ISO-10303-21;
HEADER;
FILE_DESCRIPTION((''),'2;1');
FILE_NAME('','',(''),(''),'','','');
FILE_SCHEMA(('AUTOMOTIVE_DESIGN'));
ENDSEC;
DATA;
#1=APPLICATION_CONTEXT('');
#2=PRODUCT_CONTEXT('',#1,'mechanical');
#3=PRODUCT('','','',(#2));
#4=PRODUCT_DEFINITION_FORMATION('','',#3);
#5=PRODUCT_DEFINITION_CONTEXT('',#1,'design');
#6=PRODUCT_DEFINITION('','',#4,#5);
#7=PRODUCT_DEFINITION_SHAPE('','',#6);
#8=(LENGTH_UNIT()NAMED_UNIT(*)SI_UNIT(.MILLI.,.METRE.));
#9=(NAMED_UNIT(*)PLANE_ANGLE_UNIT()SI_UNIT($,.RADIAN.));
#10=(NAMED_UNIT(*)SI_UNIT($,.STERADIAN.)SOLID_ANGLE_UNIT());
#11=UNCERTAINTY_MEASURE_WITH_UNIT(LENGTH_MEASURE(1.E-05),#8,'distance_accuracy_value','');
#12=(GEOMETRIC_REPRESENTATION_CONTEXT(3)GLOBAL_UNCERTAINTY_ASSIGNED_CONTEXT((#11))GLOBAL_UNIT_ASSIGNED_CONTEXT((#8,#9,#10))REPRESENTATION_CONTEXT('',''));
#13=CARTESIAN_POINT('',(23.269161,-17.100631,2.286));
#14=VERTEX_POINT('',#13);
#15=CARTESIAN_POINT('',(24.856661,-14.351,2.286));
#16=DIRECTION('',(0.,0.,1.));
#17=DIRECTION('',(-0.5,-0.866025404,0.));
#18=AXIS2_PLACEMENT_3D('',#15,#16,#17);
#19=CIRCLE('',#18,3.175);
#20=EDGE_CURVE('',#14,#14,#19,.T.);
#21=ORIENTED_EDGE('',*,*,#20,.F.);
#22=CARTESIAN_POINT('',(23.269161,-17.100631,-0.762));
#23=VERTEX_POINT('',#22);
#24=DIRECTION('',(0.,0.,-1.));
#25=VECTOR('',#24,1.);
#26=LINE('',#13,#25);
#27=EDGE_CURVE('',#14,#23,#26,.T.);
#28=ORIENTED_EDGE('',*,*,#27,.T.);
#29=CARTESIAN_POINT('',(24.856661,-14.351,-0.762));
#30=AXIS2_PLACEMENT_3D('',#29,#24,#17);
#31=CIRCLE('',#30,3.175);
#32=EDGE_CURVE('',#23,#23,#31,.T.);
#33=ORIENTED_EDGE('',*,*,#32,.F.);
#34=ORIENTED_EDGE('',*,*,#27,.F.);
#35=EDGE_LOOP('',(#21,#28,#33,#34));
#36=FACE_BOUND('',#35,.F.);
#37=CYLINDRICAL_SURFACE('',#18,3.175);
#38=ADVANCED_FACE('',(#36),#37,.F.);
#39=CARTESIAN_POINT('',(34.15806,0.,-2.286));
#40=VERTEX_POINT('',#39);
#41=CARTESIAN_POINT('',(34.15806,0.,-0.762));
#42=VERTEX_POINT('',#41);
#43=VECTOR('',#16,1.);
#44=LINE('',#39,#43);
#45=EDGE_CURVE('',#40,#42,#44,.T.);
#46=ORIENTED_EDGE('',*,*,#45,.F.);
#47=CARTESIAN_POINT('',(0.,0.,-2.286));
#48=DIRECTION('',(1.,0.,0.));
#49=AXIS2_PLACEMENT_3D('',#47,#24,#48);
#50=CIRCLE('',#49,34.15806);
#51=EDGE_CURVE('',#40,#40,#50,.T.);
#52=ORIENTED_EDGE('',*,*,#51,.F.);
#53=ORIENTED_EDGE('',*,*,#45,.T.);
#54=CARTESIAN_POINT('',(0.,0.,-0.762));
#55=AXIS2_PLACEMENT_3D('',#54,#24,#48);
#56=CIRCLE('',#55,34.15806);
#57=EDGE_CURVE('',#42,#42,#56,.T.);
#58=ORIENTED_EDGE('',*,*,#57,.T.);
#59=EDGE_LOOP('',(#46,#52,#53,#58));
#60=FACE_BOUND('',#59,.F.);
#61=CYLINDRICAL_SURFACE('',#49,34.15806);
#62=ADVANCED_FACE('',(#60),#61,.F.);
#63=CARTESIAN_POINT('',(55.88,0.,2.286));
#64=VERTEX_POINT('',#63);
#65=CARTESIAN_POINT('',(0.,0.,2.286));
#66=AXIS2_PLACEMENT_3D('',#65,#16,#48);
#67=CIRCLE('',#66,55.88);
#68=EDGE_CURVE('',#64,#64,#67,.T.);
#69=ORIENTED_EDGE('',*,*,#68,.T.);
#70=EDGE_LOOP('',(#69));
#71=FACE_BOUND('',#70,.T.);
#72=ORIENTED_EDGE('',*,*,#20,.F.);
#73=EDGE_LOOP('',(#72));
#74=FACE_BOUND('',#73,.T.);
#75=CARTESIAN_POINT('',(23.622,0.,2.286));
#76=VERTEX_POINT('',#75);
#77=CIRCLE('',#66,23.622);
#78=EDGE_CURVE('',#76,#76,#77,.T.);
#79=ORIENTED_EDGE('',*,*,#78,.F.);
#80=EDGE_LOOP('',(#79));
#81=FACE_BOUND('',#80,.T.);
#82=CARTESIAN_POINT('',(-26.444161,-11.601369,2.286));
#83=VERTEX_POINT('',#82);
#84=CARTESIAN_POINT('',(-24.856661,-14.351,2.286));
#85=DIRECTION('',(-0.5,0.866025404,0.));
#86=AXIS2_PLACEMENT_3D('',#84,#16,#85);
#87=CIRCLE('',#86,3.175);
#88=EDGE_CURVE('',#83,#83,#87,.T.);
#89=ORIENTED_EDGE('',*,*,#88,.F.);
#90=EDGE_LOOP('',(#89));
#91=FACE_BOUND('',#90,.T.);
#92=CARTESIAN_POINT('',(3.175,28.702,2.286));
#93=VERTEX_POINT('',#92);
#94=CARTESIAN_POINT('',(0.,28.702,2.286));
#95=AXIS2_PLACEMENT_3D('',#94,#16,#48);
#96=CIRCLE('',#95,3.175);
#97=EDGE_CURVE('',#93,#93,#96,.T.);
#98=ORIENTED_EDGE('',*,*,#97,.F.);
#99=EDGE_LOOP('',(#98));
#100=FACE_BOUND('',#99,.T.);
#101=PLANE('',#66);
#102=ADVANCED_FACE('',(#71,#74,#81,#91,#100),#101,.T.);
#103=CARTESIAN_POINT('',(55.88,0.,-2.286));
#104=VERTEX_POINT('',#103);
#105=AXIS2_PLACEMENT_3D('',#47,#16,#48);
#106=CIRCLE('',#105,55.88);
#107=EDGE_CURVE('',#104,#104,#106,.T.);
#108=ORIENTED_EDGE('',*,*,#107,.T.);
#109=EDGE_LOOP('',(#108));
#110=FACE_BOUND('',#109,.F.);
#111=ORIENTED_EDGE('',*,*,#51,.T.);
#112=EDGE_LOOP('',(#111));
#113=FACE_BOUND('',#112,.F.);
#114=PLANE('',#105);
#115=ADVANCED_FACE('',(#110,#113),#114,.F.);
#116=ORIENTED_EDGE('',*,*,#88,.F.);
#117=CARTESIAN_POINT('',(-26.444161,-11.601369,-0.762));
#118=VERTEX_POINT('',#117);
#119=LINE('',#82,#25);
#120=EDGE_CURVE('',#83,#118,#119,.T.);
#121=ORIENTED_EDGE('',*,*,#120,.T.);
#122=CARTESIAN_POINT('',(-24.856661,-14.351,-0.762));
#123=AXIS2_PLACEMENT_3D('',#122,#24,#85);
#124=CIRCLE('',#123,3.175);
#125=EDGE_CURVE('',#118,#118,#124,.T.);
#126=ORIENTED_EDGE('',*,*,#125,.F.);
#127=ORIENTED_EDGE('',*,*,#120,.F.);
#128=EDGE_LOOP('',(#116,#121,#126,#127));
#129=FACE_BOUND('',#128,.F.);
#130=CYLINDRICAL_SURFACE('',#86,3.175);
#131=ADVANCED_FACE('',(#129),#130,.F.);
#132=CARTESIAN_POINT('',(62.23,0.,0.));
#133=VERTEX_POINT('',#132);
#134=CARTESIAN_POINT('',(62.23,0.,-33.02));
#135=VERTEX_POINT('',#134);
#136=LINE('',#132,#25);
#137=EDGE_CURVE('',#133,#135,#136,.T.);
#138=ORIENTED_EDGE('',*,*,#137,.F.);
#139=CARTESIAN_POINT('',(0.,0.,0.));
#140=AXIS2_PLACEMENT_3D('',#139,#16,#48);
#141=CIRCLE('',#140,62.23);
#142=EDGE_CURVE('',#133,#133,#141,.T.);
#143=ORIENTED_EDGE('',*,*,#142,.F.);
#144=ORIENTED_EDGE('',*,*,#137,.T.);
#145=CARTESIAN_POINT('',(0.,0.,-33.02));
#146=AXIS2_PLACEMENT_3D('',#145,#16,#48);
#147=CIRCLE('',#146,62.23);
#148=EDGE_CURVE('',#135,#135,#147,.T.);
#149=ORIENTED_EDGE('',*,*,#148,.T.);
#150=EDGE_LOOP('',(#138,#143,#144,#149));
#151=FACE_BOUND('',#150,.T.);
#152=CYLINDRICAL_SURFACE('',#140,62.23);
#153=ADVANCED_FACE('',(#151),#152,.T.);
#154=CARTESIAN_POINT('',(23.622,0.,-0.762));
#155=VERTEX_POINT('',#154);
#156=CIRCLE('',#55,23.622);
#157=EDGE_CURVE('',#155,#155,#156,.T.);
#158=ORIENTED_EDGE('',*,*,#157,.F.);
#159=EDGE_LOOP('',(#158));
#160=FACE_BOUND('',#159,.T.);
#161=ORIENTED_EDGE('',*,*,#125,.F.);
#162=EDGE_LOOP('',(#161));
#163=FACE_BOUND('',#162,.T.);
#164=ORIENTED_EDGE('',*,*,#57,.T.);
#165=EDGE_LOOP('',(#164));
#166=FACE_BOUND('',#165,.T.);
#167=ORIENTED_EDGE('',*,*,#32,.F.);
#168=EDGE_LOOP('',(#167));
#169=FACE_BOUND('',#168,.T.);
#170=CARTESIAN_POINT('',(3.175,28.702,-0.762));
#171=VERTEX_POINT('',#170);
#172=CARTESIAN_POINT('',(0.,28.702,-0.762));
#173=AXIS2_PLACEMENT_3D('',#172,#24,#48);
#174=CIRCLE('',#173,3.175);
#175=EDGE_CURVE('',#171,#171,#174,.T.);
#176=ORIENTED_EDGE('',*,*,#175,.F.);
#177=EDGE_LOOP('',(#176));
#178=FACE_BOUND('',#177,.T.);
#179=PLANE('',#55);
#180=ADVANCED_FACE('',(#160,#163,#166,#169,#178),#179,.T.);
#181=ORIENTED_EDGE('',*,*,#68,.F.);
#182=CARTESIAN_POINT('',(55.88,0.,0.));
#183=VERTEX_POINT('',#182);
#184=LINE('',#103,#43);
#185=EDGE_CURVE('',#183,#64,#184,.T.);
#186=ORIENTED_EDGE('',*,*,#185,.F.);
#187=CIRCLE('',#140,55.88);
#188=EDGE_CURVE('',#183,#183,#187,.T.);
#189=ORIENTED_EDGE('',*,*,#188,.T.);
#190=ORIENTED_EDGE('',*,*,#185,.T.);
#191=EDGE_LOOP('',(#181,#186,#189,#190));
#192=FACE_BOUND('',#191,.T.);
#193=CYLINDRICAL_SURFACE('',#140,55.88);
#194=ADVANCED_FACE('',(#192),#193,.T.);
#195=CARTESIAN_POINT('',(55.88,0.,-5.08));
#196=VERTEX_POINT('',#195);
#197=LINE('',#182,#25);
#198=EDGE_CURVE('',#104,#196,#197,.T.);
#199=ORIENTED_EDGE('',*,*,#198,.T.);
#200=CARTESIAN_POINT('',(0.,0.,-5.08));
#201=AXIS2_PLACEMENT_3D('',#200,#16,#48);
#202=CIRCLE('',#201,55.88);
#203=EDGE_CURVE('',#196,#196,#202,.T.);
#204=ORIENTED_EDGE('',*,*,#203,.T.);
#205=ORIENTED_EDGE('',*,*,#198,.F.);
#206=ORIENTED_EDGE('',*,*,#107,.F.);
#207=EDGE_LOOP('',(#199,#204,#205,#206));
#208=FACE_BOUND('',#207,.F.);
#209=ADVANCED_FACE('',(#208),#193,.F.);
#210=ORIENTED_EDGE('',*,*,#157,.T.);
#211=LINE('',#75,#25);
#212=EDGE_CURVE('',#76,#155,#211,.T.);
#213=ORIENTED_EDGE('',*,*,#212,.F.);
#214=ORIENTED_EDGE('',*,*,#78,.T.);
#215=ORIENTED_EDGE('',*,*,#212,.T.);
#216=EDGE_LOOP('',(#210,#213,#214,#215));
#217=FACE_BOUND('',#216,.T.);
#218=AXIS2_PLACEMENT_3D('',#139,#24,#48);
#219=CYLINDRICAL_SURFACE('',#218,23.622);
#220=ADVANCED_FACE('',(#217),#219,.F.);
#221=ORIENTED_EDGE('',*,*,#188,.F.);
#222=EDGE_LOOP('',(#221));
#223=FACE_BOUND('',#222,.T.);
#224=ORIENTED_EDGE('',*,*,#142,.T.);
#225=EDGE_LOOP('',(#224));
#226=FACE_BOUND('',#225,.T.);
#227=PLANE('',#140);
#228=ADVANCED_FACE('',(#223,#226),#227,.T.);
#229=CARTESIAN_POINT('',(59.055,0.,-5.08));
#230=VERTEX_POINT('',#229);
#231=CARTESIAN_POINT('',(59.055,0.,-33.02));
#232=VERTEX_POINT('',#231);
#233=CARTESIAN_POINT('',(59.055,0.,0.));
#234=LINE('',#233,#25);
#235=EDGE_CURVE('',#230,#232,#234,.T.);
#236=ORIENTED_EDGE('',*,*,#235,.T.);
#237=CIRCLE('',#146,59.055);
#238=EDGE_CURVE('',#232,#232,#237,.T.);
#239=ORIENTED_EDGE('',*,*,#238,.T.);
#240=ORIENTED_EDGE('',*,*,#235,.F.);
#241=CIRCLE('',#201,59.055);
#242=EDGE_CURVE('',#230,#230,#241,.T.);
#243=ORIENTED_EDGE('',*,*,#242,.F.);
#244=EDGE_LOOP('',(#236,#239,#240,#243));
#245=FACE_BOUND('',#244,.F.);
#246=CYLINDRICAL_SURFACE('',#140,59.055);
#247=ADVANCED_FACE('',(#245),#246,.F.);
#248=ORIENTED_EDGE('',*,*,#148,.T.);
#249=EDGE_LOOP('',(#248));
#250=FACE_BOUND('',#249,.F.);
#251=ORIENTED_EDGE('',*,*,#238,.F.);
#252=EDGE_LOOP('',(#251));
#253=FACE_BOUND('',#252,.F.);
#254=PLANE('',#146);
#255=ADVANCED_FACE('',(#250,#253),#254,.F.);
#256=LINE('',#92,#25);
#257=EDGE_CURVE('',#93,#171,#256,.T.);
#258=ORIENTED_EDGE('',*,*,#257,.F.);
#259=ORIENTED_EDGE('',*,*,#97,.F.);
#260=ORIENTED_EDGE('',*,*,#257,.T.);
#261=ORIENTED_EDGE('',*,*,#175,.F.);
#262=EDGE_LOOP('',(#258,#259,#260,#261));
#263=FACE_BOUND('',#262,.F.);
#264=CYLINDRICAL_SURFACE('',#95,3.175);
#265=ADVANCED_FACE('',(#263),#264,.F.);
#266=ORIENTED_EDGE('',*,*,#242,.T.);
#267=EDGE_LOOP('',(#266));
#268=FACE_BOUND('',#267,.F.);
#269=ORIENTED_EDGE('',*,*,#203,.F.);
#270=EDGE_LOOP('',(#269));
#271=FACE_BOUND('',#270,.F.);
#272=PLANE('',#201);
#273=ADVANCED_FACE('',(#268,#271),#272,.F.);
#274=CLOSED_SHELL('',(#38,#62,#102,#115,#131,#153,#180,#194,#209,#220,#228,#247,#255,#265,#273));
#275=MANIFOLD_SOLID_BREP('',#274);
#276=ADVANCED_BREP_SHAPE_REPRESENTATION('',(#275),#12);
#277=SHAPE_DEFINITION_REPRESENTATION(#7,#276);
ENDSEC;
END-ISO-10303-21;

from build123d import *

# Parameters (mm, degrees)
F0_R            = 55.88
F0_R_2          = 23.622
F1_DEPTH        = 2.286
F0_R_3          = 59.055
F2_DEPTH        = 5.08
F0_R_4          = 62.23
F3_DEPTH        = 33.02
F4_R            = 3.175
F5_DEPTH        = 25.4
F5_COPIES_COUNT = 3
F7_R            = 34.1580603644
F7_R_2          = 3.175
F7_R_3          = 23.622
F8_DEPTH        = 1.524


# Not quite as in the source:
# - a pattern or mirror of a feature is missing from the dataset's text; its kind, count and spacing are read off the source's solid


with BuildPart() as f1:
    # F0 (on Top) → F1 (new body, symmetric)
    with BuildSketch(Plane.XY):
        Circle(F0_R)
        Circle(F0_R_2, mode=Mode.SUBTRACT)
    extrude(amount=F1_DEPTH, both=True)

    # F0 (on Top) → F2 (join)
    with BuildSketch(Plane.XY):
        Circle(F0_R_3)
        Circle(F0_R, mode=Mode.SUBTRACT)
    extrude(amount=-F2_DEPTH)

    # F0 (on Top) → F3 (join)
    with BuildSketch(Plane.XY):
        Circle(F0_R_4)
        Circle(F0_R_3, mode=Mode.SUBTRACT)
    extrude(amount=-F3_DEPTH)

    # F4 (on face) → F5 (cut)
    with BuildSketch(Plane.XY.offset(2.286)):
        with Locations((0, 28.702)):
            Circle(F4_R)
    f5 = extrude(amount=-F5_DEPTH, mode=Mode.SUBTRACT)

    # F5_copies: F5 ×3 about axis
    f5_copies_axis = Axis((0, 0, 0), (0, 0, 1))
    for i in range(1, F5_COPIES_COUNT):
        add(f5.rotate(f5_copies_axis, i * 360 / F5_COPIES_COUNT), mode=Mode.SUBTRACT)

    # F7 (on face) → F8 (cut)
    with BuildSketch(Plane(origin=(0, 0, -2.286), x_dir=(1, 0, 0), z_dir=(0, 0, -1))):
        Circle(F7_R)
        with Locations((0, -28.702)):
            Circle(F7_R_2, mode=Mode.SUBTRACT)
        Circle(F7_R_3, mode=Mode.SUBTRACT)
        with Locations((-24.8566611394, 14.351)):
            Circle(F7_R_2, mode=Mode.SUBTRACT)
        with Locations((24.8566611394, 14.351)):
            Circle(F7_R_2, mode=Mode.SUBTRACT)
    extrude(amount=-F8_DEPTH, mode=Mode.SUBTRACT)


solid = f1.part
